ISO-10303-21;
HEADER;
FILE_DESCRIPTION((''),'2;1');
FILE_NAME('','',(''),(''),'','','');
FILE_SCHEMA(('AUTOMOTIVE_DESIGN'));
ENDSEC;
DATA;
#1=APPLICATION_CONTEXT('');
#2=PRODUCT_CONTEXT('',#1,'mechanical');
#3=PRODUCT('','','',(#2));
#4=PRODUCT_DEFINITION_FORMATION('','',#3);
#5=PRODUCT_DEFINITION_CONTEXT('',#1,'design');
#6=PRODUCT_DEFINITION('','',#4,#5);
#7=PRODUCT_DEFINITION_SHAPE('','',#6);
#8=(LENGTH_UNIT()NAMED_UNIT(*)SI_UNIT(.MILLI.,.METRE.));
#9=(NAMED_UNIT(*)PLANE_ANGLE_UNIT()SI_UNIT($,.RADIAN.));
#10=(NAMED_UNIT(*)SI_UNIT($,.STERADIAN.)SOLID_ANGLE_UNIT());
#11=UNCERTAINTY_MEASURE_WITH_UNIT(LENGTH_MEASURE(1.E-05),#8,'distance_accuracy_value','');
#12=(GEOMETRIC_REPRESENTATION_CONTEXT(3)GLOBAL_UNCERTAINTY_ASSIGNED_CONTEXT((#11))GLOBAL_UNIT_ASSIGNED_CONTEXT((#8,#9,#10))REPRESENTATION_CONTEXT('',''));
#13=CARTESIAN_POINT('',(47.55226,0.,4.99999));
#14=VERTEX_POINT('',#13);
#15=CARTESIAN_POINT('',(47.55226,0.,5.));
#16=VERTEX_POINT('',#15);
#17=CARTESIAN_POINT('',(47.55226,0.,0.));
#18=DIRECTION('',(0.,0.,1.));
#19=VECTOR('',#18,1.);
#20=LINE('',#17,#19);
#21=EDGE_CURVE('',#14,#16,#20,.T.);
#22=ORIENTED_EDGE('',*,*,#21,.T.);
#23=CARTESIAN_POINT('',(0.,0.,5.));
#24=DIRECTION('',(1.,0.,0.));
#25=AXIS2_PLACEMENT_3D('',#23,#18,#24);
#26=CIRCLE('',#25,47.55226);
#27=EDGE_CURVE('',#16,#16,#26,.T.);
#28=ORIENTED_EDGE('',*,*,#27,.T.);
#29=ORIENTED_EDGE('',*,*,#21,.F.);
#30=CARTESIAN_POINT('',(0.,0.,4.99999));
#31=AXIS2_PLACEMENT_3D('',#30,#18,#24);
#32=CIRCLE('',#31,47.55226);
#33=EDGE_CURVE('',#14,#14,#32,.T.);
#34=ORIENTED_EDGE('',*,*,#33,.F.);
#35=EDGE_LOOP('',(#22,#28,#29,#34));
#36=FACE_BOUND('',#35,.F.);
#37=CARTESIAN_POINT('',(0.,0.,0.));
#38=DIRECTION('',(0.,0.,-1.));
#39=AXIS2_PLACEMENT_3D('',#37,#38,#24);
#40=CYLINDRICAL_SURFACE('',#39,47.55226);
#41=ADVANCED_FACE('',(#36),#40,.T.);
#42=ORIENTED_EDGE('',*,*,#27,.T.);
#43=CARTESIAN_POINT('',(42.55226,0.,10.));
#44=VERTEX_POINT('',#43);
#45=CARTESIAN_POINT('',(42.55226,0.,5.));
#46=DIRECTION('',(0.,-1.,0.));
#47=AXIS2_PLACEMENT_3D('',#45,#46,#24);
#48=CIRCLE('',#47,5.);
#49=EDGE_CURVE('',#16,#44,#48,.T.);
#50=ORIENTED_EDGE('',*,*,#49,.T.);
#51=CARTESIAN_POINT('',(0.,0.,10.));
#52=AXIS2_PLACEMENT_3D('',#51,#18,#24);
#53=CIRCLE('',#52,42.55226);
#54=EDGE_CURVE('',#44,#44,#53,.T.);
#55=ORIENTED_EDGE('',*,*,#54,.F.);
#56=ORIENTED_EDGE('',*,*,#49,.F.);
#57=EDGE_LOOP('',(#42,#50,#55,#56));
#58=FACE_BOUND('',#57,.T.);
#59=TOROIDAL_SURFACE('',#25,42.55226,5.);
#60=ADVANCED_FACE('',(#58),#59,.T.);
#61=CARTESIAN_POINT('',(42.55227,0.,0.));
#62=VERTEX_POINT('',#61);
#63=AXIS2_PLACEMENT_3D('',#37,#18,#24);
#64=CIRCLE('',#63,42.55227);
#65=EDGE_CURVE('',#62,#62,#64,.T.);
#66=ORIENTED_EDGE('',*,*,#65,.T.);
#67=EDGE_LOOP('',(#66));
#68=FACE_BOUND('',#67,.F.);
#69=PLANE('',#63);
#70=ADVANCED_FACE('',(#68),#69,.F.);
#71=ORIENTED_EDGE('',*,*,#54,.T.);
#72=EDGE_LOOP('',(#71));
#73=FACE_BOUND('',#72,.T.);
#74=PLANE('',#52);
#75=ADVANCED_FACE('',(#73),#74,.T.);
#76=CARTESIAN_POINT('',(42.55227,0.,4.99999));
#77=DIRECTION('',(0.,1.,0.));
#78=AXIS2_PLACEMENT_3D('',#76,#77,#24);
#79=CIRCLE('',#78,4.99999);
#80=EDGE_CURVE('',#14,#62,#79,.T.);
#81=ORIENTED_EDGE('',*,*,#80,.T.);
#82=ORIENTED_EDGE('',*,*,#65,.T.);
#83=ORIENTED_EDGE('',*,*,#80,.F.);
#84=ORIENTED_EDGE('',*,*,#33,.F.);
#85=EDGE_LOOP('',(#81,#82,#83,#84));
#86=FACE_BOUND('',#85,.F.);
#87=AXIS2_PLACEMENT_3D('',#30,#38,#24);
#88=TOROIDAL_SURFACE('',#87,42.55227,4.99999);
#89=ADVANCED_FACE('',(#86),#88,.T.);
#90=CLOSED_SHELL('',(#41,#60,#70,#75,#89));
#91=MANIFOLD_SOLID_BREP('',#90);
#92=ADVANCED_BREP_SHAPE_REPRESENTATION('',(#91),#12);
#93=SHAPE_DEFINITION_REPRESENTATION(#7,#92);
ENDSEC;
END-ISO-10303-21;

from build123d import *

# Parameters (mm, degrees)
F0_R     = 47.5522600406
F1_DEPTH = 10
F2_R     = 5
F3_R     = 4.99999


# Not quite as in the source:
# - a fillet or chamfer is up to 0.001 mm smaller than in the source, because OpenCascade refuses the exact size


with BuildPart() as f1:
    # F0 (on Top) → F1 (new body)
    with BuildSketch(Plane.XY):
        Circle(F0_R)
    extrude(amount=F1_DEPTH)

    # F2
    f2_edges = [f1.edges().sort_by_distance(p)[0] for p in [
        (-47.55226, 0, 10),
    ]]
    fillet(f2_edges, radius=F2_R)

    # F3 (radius 5 in the source; OpenCascade refuses exactly that, so slightly less here)
    f3_edges = [f1.edges().sort_by_distance(p)[0] for p in [
        (-47.55226, 0, 0),
    ]]
    fillet(f3_edges, radius=F3_R)


solid = f1.part
